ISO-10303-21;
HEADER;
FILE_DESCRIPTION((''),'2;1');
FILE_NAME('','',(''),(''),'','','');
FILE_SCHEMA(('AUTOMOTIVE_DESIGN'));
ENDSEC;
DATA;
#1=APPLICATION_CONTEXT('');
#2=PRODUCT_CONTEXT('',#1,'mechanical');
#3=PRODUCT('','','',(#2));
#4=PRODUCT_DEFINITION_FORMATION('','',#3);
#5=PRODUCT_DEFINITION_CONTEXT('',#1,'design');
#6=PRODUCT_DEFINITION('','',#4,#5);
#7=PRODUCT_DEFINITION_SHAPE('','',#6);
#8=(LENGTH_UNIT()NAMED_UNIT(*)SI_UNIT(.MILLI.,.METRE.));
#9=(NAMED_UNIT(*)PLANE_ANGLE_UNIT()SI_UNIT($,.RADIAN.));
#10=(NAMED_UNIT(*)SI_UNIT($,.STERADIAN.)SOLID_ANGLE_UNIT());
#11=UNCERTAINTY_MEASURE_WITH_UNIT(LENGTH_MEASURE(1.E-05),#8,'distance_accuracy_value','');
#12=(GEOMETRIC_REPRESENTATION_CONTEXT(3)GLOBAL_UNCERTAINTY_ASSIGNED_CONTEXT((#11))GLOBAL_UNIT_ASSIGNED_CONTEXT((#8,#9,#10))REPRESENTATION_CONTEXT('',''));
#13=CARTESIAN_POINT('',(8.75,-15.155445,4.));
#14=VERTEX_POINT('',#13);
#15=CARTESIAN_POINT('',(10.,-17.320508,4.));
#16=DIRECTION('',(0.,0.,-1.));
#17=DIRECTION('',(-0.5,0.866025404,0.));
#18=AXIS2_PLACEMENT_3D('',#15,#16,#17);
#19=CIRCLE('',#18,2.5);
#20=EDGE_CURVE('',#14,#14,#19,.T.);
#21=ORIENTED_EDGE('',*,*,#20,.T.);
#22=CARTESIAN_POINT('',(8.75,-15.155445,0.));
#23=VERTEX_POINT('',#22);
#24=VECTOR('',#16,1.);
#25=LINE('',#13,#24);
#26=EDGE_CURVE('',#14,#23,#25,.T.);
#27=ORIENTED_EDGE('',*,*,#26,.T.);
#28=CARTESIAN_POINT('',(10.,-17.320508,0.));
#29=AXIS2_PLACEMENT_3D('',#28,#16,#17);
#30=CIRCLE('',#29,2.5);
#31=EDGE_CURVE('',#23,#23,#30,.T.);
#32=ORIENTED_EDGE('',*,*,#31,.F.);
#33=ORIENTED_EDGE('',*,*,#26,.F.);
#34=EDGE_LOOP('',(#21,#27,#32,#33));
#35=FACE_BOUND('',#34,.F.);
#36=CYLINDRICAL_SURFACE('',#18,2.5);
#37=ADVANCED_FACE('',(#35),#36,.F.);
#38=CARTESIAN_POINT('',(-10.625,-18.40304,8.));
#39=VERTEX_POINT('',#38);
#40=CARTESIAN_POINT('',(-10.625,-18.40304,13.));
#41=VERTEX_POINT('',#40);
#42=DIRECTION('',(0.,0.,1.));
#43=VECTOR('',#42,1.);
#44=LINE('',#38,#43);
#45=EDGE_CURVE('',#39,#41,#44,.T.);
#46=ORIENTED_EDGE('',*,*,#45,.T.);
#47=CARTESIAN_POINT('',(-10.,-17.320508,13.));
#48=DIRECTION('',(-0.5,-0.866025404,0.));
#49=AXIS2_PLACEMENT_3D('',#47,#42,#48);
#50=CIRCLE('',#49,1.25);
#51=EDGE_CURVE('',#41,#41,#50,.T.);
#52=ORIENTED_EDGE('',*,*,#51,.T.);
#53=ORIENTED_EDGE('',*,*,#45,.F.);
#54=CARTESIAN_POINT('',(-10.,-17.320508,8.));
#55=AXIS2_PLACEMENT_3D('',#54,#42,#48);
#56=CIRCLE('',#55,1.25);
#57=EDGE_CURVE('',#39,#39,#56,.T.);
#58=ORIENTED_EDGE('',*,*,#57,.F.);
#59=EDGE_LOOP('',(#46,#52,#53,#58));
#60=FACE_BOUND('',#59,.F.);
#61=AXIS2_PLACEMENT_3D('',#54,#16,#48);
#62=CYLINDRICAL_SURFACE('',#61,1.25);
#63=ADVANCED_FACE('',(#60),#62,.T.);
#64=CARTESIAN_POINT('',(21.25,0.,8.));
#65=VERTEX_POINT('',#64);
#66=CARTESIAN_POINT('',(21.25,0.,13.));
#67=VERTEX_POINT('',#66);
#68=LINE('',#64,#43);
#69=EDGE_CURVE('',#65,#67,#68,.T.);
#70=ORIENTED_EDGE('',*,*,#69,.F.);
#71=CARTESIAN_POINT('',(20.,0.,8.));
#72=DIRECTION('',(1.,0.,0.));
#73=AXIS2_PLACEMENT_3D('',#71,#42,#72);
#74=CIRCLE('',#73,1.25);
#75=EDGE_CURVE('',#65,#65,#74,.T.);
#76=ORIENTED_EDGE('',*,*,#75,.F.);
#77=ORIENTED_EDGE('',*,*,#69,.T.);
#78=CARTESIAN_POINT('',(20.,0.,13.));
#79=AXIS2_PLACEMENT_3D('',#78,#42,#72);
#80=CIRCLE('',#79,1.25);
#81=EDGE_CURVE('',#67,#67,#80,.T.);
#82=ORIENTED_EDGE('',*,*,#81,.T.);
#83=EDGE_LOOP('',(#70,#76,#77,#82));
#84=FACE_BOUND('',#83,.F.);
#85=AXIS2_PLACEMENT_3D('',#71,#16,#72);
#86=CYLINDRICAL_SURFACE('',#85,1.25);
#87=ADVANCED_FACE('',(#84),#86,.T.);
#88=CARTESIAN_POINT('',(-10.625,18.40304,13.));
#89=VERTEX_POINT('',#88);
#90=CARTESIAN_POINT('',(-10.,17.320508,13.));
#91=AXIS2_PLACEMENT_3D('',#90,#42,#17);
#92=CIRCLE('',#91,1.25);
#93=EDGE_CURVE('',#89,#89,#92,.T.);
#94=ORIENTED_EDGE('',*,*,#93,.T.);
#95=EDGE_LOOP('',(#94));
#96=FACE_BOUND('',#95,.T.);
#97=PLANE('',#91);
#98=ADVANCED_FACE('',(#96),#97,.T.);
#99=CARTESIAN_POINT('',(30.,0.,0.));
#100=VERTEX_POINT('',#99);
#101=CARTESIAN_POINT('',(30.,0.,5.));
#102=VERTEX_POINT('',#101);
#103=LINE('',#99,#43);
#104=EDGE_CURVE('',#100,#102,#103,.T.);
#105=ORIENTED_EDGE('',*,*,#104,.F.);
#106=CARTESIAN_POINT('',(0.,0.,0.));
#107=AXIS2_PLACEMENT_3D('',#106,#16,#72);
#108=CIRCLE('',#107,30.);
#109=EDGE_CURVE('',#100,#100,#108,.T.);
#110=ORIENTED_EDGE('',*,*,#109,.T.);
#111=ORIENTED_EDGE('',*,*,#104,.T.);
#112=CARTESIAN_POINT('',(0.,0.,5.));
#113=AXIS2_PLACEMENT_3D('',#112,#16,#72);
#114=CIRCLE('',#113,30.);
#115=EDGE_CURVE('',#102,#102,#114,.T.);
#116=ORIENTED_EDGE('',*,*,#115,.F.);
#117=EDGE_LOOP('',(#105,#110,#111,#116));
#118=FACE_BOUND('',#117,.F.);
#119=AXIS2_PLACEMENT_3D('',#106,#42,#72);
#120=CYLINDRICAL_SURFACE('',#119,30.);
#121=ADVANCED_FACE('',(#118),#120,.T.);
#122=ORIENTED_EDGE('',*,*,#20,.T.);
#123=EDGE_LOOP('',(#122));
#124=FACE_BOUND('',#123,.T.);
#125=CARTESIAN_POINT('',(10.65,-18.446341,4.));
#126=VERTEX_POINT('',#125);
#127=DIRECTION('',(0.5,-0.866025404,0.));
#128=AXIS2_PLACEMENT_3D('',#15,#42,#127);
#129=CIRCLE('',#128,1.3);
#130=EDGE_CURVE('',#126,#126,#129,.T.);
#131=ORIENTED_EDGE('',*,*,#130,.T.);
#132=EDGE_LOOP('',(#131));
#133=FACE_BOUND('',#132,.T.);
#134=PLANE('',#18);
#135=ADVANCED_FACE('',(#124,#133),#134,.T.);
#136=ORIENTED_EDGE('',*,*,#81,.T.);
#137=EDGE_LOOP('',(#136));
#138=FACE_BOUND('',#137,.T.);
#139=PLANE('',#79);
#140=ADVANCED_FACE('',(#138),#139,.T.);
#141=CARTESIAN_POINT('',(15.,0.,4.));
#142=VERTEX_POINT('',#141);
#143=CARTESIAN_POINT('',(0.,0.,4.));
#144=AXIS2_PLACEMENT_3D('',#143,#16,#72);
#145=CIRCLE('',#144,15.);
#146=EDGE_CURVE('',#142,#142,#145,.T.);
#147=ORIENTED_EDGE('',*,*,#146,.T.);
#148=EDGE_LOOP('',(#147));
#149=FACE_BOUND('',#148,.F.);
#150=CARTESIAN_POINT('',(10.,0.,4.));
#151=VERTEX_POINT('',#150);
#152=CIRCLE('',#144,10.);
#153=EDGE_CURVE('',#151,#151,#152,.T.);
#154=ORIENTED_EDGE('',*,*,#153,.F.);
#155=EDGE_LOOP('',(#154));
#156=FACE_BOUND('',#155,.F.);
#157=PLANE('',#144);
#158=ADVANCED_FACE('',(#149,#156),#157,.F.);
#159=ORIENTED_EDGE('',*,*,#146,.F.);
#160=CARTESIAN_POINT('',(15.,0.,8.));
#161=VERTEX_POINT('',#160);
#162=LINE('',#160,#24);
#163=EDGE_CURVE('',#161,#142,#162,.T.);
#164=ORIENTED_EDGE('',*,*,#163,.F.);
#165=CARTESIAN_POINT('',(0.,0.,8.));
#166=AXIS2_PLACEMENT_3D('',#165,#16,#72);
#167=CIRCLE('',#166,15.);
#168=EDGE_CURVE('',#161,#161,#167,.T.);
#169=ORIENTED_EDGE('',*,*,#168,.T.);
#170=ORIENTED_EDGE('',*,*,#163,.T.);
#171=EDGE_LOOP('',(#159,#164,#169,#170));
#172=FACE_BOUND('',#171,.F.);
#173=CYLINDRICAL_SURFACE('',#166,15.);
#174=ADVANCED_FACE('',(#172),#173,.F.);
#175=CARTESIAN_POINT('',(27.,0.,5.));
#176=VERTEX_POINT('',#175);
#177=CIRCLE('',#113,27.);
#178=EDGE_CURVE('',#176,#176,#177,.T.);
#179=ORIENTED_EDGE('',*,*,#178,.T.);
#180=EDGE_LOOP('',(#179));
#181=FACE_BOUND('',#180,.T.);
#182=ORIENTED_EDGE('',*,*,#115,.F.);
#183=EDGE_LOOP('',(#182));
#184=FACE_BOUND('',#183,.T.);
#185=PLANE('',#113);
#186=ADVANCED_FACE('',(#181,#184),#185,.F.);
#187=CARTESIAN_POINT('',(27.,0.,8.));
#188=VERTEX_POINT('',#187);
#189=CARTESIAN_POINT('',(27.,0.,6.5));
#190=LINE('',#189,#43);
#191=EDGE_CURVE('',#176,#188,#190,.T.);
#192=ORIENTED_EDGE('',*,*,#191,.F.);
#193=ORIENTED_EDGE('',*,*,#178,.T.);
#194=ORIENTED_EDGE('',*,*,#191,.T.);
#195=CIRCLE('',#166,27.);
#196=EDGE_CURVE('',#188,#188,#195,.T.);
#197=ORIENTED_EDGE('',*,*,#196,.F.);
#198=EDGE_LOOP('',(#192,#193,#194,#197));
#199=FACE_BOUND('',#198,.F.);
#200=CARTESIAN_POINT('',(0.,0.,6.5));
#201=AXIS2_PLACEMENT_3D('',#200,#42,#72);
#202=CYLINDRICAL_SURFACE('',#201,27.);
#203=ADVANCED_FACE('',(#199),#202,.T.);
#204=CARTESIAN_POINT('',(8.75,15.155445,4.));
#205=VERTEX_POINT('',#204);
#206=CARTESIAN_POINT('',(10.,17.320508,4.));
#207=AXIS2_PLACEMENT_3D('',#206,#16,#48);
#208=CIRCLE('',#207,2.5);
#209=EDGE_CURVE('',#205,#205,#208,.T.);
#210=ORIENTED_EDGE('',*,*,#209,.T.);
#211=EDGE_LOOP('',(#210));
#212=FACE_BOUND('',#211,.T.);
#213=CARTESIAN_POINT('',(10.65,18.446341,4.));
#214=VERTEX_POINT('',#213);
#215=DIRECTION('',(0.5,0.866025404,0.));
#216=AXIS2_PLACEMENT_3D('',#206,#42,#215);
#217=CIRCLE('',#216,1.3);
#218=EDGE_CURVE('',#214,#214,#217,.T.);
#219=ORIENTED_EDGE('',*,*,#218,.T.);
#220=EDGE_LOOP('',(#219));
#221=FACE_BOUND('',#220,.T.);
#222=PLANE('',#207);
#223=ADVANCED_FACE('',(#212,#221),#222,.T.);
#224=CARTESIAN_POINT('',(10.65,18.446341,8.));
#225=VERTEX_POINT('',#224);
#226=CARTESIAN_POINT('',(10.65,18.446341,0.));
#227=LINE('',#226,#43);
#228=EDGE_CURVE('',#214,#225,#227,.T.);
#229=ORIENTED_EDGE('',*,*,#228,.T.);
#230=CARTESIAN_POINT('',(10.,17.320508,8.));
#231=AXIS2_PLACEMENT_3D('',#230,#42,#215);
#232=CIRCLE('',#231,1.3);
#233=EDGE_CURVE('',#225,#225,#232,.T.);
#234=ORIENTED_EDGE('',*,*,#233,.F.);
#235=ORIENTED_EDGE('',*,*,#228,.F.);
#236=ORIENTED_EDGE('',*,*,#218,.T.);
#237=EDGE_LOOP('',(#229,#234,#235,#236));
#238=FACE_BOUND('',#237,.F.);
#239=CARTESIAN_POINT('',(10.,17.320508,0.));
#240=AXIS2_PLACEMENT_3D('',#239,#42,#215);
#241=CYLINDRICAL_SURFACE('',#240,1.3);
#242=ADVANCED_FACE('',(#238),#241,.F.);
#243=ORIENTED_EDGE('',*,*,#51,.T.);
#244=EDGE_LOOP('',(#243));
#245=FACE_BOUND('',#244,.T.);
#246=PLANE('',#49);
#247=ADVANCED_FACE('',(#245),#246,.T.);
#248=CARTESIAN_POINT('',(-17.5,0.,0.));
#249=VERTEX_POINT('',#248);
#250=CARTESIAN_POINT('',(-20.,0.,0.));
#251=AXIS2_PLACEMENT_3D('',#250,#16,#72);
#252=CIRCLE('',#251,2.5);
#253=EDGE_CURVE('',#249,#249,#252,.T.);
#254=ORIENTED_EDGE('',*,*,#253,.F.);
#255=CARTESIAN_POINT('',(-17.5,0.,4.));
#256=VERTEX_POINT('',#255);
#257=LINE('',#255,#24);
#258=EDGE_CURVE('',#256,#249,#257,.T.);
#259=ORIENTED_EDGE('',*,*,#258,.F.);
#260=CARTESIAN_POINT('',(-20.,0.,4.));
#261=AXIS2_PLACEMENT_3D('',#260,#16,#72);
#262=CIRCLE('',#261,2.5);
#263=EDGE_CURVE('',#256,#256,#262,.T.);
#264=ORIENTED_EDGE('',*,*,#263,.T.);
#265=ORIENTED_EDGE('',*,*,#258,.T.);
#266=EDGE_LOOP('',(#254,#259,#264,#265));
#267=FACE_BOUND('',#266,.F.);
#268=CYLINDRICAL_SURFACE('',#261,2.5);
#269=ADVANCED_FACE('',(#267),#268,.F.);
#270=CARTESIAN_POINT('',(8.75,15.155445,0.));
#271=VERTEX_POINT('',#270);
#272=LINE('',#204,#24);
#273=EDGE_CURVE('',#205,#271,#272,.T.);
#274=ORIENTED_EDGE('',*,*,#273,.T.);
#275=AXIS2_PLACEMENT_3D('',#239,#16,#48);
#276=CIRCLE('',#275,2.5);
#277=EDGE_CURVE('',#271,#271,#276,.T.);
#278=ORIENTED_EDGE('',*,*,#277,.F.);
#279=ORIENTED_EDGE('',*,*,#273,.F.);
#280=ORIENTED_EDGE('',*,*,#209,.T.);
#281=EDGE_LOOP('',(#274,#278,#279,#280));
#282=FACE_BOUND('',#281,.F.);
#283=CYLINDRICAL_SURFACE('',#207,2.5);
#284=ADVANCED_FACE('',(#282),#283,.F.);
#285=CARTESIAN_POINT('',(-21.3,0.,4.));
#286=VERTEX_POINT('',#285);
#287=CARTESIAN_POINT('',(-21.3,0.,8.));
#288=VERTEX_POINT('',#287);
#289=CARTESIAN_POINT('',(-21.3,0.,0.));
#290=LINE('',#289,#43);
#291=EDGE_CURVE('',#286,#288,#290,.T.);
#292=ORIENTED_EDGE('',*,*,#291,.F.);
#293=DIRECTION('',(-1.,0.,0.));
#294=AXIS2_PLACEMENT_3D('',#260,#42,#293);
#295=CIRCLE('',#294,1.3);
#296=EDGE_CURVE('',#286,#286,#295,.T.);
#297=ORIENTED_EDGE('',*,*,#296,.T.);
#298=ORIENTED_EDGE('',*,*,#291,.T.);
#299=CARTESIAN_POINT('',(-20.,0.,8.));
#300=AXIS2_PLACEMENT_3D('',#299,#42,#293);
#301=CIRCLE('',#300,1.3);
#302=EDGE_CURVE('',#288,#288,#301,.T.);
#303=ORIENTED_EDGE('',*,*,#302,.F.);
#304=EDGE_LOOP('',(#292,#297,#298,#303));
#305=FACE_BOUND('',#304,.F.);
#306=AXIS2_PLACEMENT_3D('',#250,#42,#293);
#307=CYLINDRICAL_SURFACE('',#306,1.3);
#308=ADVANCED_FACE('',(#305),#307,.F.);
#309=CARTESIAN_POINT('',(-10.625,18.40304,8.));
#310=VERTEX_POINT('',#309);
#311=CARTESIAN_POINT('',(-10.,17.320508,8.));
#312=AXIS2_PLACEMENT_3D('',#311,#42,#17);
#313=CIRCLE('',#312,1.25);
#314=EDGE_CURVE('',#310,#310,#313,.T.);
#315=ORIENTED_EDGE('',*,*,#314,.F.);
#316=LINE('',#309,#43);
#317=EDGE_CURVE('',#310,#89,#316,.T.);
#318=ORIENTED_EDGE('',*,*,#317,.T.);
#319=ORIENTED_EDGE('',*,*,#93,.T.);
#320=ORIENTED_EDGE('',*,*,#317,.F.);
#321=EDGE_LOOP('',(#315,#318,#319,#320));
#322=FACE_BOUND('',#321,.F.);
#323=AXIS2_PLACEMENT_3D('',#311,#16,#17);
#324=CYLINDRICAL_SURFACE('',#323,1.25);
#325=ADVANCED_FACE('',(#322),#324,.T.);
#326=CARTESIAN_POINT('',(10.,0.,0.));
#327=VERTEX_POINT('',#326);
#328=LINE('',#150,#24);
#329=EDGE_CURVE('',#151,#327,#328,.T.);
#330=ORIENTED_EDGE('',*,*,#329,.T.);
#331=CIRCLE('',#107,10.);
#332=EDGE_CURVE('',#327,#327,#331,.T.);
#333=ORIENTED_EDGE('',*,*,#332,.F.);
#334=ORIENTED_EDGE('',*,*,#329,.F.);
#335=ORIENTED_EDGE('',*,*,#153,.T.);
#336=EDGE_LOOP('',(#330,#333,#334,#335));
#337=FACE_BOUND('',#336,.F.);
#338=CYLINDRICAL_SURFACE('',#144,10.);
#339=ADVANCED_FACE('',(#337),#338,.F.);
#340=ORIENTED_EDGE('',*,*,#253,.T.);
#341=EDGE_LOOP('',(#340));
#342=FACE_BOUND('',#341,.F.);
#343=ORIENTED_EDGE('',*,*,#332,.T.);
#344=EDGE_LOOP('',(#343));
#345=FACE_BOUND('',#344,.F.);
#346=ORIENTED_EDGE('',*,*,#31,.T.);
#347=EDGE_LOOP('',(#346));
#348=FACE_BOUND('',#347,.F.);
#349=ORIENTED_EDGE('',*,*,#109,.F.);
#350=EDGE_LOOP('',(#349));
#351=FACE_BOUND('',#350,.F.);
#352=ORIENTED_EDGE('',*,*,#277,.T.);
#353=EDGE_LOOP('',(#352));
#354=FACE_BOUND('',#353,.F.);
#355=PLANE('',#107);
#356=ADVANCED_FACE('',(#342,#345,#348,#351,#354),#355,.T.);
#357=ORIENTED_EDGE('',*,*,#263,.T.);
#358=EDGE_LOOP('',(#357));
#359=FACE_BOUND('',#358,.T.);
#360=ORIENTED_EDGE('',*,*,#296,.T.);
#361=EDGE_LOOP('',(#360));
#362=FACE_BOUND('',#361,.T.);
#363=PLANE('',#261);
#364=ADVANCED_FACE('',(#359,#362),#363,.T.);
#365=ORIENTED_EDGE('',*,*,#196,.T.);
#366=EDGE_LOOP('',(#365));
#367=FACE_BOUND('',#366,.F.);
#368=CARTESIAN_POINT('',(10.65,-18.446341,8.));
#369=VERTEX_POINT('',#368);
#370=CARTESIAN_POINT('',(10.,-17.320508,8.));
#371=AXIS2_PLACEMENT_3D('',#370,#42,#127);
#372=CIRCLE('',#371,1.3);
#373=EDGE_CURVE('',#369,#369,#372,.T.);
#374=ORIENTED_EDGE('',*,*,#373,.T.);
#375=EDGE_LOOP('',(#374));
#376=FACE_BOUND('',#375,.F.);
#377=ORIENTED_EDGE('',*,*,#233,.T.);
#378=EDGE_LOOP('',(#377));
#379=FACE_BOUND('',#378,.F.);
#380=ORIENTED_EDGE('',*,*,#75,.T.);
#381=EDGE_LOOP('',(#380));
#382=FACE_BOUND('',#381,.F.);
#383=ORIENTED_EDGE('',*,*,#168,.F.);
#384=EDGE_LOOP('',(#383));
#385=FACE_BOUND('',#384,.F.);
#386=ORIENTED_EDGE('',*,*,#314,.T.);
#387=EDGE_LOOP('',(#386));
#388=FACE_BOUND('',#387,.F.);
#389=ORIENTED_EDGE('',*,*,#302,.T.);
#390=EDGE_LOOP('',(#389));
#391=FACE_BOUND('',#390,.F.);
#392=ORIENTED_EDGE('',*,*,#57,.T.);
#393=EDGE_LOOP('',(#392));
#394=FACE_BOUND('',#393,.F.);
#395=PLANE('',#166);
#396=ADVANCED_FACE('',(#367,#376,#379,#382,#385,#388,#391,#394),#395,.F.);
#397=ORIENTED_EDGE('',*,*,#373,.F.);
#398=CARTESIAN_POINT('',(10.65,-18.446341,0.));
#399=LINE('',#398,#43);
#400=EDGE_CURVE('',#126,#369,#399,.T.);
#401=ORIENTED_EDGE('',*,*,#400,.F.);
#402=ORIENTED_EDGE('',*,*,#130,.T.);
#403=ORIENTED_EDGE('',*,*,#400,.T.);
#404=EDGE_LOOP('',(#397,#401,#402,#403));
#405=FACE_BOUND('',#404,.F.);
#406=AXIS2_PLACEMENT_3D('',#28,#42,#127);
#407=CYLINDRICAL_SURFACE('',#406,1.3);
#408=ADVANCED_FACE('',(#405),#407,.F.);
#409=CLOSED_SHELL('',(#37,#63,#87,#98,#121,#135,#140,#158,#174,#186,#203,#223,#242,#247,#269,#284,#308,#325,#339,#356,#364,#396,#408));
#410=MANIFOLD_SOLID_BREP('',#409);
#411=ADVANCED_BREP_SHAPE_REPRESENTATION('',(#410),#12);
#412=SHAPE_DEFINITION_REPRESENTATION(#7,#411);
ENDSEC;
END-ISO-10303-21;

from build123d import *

# Parameters (mm, degrees)
F2_R            = 1.25
F3_DEPTH        = 5
F3_COPIES_COUNT = 3
F5_D            = 2.6
F5_CBORE_D      = 5
F5_CBORE_DEPTH  = 4
F5_COPIES_COUNT = 3
F6_W            = 3
F6_H            = 3


# Not quite as in the source:
# - a pattern or mirror of a feature is missing from the dataset's text; its kind, count and spacing are read off the source's solid


with BuildPart() as f1:
    # F0 (on Front) → F1 (revolve)
    with BuildSketch(Plane.XZ):
        Polygon((10, 4), (10, 0), (30, 0), (30, 8), (15, 8), (15, 4), align=None)
    revolve(axis=Axis((0, 0, 1.9594207406), (0, 0, -1)))

    # F2 (on face) → F3 (join)
    with BuildSketch(Plane.XY.offset(8)):
        with Locations((20, 0)):
            Circle(F2_R)
    f3 = extrude(amount=F3_DEPTH)

    # F3_copies: F3 ×3 about axis
    f3_copies_axis = Axis((0, 0, 0), (0, 0, 1))
    for i in range(1, F3_COPIES_COUNT):
        add(f3.rotate(f3_copies_axis, i * 360 / F3_COPIES_COUNT))

    # F5 (through all)
    with Locations(Plane(origin=(0, 0, 0), x_dir=(1, 0, 0), z_dir=(0, 0, -1))):
        with Locations((-20, 0)):
            f5 = CounterBoreHole(F5_D / 2, F5_CBORE_D / 2, F5_CBORE_DEPTH)

    # F5_copies: F5 ×3 about axis
    f5_copies_axis = Axis((0, 0, 0), (0, 0, 1))
    for i in range(1, F5_COPIES_COUNT):
        add(f5.rotate(f5_copies_axis, i * 360 / F5_COPIES_COUNT), mode=Mode.SUBTRACT)

    # F6 (on Front) → F7 (revolve, cut)
    with BuildSketch(Plane.XZ):
        with Locations((28.5, 6.5)):
            Rectangle(F6_W, F6_H)
    revolve(axis=Axis((0, 0, 1.9594207406), (0, 0, -1)), mode=Mode.SUBTRACT)


solid = f1.part
